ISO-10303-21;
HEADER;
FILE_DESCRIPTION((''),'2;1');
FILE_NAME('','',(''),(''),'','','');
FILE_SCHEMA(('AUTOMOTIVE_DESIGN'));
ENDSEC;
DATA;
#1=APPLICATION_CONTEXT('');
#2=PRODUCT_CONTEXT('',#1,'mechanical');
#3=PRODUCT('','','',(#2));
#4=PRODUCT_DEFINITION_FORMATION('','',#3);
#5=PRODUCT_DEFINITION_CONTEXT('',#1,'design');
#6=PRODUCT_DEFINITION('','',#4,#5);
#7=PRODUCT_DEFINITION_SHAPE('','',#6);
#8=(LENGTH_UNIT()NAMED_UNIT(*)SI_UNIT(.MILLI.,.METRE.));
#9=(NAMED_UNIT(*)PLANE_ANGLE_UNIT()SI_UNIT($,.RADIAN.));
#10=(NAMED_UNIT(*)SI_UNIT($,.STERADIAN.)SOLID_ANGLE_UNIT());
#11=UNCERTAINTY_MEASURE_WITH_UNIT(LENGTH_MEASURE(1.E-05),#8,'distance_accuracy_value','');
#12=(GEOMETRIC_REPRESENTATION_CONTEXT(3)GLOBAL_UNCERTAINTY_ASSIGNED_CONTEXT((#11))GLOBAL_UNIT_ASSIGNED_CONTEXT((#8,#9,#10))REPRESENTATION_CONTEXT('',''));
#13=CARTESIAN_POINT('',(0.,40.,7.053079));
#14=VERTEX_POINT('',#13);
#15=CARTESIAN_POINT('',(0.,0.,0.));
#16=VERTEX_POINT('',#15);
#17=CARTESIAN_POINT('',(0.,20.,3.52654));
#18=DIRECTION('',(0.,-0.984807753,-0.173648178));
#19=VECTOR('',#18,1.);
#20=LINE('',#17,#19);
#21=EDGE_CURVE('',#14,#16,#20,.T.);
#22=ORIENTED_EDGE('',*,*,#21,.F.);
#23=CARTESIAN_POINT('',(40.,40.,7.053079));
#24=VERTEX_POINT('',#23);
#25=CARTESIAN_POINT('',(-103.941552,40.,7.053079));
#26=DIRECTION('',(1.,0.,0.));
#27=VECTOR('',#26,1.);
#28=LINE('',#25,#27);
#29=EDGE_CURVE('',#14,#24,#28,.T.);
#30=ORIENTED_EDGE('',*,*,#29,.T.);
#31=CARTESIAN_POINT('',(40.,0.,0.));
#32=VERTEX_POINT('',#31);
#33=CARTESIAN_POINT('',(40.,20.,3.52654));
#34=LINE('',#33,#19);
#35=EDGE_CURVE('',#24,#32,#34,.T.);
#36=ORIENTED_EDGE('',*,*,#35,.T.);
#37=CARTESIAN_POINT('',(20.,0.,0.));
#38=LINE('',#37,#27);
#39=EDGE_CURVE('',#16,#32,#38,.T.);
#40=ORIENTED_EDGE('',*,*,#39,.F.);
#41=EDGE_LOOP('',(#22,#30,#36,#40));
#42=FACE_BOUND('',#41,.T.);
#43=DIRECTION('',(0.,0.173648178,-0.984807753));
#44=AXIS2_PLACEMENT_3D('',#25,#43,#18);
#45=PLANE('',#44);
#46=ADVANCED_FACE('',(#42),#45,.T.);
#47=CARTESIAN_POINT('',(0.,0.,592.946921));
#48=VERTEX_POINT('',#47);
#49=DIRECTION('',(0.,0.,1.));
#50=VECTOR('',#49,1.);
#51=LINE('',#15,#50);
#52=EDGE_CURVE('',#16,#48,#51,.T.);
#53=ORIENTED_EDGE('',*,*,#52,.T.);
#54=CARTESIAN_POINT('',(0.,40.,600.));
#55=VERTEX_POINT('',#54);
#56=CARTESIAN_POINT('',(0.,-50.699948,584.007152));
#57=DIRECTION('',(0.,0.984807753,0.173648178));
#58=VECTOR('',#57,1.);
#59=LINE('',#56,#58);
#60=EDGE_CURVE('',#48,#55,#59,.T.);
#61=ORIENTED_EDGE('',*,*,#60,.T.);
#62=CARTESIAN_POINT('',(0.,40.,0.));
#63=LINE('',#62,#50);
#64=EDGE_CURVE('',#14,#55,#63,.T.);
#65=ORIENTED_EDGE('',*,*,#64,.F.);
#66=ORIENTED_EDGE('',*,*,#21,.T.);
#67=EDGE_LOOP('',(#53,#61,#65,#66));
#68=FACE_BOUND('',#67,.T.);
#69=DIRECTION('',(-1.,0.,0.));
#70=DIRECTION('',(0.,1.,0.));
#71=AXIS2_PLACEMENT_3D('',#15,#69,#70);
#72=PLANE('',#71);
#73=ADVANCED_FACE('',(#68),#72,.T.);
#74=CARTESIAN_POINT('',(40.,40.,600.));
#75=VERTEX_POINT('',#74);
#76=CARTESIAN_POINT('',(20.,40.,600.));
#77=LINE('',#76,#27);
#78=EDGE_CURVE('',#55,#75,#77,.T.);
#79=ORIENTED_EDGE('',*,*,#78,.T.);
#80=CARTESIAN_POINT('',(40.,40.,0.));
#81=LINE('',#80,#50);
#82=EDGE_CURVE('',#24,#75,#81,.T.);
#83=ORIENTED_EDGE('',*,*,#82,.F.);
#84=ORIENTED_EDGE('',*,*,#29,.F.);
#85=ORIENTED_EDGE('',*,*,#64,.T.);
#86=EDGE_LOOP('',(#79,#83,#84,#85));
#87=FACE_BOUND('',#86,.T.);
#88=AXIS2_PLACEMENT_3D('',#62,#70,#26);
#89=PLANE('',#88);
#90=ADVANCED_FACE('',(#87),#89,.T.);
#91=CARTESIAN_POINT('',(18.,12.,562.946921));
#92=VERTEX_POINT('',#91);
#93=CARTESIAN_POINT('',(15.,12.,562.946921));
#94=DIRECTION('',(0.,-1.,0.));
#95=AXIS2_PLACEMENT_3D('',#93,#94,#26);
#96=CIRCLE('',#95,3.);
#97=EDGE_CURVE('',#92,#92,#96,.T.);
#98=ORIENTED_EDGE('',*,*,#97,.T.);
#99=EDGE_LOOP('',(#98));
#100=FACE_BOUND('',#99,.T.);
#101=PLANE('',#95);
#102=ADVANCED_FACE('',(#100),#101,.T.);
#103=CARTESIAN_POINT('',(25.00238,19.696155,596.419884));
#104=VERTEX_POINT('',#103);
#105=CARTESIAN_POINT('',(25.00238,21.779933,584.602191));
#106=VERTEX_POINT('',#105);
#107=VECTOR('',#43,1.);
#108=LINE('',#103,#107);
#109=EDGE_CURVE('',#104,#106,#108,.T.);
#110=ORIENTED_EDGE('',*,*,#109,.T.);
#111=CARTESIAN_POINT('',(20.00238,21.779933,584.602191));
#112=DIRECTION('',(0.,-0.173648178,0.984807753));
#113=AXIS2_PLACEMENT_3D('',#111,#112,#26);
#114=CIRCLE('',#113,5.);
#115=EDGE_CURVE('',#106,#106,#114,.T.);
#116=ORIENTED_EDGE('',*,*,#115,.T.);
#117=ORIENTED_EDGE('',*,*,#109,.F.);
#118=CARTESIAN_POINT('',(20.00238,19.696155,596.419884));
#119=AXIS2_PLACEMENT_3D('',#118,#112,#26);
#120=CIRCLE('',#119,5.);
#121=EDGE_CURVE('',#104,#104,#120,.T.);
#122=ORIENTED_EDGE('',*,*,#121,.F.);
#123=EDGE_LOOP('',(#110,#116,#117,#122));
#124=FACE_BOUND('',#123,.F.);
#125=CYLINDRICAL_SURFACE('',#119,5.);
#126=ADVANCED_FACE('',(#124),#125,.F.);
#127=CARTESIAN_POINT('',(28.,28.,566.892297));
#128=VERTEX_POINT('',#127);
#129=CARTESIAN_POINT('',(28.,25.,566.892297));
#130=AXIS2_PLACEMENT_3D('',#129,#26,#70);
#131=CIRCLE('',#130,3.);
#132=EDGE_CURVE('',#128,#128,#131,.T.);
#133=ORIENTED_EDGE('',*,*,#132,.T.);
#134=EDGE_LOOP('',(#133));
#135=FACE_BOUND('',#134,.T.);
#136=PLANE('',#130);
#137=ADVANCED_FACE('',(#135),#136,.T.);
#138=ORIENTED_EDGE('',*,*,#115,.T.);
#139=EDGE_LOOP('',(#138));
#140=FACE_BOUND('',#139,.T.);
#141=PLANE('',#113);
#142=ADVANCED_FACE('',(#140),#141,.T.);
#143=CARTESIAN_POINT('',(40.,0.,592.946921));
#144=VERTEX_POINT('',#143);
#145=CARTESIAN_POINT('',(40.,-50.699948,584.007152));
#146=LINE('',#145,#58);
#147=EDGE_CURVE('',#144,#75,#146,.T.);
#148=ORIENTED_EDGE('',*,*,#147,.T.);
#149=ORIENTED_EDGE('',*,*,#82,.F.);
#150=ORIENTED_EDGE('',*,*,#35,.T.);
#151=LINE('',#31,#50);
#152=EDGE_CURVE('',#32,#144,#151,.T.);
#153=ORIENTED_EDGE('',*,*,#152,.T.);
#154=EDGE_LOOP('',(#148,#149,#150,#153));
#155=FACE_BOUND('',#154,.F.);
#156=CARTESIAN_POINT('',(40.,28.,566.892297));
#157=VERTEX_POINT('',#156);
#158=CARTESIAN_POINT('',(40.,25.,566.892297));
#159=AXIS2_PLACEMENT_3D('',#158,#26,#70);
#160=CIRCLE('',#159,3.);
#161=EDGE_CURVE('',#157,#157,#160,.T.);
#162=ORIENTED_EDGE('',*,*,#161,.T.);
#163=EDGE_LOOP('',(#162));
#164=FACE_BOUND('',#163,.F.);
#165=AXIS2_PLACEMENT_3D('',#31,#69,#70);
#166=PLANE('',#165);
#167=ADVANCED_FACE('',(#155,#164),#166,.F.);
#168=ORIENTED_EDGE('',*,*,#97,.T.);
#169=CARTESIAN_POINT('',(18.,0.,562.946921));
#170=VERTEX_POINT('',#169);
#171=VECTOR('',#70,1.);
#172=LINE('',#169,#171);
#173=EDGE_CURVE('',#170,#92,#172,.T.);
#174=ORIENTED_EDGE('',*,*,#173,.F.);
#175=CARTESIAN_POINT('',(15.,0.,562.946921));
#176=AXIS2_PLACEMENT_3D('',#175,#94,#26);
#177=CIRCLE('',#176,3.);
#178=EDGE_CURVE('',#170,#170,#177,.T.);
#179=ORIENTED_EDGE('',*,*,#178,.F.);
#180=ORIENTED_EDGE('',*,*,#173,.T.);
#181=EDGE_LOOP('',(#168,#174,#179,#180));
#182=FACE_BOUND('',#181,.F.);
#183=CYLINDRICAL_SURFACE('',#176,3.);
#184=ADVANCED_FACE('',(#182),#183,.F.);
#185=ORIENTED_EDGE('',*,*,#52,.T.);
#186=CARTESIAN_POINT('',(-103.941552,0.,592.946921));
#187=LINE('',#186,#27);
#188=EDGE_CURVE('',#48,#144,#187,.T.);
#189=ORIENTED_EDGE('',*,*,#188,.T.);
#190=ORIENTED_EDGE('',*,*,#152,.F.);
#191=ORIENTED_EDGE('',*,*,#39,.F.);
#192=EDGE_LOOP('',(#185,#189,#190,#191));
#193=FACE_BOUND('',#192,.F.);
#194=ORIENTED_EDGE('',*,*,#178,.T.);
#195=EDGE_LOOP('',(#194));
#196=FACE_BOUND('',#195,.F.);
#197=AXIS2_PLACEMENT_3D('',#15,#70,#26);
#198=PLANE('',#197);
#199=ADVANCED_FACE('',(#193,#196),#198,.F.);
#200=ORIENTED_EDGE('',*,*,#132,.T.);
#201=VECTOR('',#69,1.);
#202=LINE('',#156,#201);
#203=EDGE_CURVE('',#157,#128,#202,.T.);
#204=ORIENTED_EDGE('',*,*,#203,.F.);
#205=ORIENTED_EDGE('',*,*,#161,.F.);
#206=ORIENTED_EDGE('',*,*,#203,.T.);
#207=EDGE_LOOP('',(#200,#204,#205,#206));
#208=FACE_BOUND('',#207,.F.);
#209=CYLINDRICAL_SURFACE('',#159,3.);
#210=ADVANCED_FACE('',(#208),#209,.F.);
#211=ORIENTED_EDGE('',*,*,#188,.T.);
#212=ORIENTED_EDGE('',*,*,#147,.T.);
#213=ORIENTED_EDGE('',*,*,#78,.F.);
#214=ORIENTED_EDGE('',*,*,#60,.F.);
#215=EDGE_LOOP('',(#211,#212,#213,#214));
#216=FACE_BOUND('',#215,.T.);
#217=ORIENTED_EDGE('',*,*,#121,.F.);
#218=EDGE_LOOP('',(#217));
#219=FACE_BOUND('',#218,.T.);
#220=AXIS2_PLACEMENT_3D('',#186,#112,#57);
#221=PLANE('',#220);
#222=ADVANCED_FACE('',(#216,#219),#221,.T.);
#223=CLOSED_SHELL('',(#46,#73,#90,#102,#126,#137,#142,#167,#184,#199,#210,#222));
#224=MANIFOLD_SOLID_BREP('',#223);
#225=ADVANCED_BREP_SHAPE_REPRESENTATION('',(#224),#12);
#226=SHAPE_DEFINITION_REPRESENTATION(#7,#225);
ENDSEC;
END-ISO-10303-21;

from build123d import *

# Parameters (mm, degrees)
F0_W        = 40
F0_H        = 40
F1_DEPTH    = 600
F3_T1_DEPTH = 247.8831037137
F4_R        = 3
F6_DEPTH    = 12
F5_R        = 3
F7_DEPTH    = 12
F8_R        = 5
F9_DEPTH    = 12


# Not quite as in the source:
# - a fillet or chamfer that OpenCascade refuses, or shapes differently, is made with other operations: its cross-section is extruded or revolved along the edge and cut away or added
# - a feature of the source that left no trace in its solid (it failed there, or was rolled back) is left out


with BuildPart() as f1:
    # F0 (on Top) → F1 (new body)
    with BuildSketch(Plane.XY):
        with Locations((20, 20)):
            Rectangle(F0_W, F0_H)
    extrude(amount=F1_DEPTH)

    # F3: chamfer of 40 x 7.0530792283 on 2 edges, made by hand

    # F3_s2 → F3_t1 (cut)
    with BuildSketch(Plane.YZ.offset(-103.9415518568)):
        Polygon((40, 7.0530792283), (0, 0), (40, 0), align=None)
        Polygon((0, 592.9469207717), (40, 600), (0, 600), align=None)
    extrude(amount=F3_T1_DEPTH, mode=Mode.SUBTRACT)

    # F4 (on face) → F6 (cut)
    with BuildSketch(Plane.XZ):
        with Locations((15, 562.9469207717)):
            Circle(F4_R)
    extrude(amount=-F6_DEPTH, mode=Mode.SUBTRACT)

    # F5 (on face) → F7 (cut)
    with BuildSketch(Plane.YZ.offset(40)):
        with Locations((25, 566.8922969328)):
            Circle(F5_R)
    extrude(amount=-F7_DEPTH, mode=Mode.SUBTRACT)

    # F8 (on face) → F9 (cut)
    with BuildSketch(Plane(origin=(0, -101.3998954134, 575.0673833693), x_dir=(1, 0, 0), z_dir=(0, -0.1736481777, 0.984807753))):
        with Locations((20.0023799473, 122.9641521036)):
            Circle(F8_R)
    extrude(amount=-F9_DEPTH, mode=Mode.SUBTRACT)


solid = f1.part
